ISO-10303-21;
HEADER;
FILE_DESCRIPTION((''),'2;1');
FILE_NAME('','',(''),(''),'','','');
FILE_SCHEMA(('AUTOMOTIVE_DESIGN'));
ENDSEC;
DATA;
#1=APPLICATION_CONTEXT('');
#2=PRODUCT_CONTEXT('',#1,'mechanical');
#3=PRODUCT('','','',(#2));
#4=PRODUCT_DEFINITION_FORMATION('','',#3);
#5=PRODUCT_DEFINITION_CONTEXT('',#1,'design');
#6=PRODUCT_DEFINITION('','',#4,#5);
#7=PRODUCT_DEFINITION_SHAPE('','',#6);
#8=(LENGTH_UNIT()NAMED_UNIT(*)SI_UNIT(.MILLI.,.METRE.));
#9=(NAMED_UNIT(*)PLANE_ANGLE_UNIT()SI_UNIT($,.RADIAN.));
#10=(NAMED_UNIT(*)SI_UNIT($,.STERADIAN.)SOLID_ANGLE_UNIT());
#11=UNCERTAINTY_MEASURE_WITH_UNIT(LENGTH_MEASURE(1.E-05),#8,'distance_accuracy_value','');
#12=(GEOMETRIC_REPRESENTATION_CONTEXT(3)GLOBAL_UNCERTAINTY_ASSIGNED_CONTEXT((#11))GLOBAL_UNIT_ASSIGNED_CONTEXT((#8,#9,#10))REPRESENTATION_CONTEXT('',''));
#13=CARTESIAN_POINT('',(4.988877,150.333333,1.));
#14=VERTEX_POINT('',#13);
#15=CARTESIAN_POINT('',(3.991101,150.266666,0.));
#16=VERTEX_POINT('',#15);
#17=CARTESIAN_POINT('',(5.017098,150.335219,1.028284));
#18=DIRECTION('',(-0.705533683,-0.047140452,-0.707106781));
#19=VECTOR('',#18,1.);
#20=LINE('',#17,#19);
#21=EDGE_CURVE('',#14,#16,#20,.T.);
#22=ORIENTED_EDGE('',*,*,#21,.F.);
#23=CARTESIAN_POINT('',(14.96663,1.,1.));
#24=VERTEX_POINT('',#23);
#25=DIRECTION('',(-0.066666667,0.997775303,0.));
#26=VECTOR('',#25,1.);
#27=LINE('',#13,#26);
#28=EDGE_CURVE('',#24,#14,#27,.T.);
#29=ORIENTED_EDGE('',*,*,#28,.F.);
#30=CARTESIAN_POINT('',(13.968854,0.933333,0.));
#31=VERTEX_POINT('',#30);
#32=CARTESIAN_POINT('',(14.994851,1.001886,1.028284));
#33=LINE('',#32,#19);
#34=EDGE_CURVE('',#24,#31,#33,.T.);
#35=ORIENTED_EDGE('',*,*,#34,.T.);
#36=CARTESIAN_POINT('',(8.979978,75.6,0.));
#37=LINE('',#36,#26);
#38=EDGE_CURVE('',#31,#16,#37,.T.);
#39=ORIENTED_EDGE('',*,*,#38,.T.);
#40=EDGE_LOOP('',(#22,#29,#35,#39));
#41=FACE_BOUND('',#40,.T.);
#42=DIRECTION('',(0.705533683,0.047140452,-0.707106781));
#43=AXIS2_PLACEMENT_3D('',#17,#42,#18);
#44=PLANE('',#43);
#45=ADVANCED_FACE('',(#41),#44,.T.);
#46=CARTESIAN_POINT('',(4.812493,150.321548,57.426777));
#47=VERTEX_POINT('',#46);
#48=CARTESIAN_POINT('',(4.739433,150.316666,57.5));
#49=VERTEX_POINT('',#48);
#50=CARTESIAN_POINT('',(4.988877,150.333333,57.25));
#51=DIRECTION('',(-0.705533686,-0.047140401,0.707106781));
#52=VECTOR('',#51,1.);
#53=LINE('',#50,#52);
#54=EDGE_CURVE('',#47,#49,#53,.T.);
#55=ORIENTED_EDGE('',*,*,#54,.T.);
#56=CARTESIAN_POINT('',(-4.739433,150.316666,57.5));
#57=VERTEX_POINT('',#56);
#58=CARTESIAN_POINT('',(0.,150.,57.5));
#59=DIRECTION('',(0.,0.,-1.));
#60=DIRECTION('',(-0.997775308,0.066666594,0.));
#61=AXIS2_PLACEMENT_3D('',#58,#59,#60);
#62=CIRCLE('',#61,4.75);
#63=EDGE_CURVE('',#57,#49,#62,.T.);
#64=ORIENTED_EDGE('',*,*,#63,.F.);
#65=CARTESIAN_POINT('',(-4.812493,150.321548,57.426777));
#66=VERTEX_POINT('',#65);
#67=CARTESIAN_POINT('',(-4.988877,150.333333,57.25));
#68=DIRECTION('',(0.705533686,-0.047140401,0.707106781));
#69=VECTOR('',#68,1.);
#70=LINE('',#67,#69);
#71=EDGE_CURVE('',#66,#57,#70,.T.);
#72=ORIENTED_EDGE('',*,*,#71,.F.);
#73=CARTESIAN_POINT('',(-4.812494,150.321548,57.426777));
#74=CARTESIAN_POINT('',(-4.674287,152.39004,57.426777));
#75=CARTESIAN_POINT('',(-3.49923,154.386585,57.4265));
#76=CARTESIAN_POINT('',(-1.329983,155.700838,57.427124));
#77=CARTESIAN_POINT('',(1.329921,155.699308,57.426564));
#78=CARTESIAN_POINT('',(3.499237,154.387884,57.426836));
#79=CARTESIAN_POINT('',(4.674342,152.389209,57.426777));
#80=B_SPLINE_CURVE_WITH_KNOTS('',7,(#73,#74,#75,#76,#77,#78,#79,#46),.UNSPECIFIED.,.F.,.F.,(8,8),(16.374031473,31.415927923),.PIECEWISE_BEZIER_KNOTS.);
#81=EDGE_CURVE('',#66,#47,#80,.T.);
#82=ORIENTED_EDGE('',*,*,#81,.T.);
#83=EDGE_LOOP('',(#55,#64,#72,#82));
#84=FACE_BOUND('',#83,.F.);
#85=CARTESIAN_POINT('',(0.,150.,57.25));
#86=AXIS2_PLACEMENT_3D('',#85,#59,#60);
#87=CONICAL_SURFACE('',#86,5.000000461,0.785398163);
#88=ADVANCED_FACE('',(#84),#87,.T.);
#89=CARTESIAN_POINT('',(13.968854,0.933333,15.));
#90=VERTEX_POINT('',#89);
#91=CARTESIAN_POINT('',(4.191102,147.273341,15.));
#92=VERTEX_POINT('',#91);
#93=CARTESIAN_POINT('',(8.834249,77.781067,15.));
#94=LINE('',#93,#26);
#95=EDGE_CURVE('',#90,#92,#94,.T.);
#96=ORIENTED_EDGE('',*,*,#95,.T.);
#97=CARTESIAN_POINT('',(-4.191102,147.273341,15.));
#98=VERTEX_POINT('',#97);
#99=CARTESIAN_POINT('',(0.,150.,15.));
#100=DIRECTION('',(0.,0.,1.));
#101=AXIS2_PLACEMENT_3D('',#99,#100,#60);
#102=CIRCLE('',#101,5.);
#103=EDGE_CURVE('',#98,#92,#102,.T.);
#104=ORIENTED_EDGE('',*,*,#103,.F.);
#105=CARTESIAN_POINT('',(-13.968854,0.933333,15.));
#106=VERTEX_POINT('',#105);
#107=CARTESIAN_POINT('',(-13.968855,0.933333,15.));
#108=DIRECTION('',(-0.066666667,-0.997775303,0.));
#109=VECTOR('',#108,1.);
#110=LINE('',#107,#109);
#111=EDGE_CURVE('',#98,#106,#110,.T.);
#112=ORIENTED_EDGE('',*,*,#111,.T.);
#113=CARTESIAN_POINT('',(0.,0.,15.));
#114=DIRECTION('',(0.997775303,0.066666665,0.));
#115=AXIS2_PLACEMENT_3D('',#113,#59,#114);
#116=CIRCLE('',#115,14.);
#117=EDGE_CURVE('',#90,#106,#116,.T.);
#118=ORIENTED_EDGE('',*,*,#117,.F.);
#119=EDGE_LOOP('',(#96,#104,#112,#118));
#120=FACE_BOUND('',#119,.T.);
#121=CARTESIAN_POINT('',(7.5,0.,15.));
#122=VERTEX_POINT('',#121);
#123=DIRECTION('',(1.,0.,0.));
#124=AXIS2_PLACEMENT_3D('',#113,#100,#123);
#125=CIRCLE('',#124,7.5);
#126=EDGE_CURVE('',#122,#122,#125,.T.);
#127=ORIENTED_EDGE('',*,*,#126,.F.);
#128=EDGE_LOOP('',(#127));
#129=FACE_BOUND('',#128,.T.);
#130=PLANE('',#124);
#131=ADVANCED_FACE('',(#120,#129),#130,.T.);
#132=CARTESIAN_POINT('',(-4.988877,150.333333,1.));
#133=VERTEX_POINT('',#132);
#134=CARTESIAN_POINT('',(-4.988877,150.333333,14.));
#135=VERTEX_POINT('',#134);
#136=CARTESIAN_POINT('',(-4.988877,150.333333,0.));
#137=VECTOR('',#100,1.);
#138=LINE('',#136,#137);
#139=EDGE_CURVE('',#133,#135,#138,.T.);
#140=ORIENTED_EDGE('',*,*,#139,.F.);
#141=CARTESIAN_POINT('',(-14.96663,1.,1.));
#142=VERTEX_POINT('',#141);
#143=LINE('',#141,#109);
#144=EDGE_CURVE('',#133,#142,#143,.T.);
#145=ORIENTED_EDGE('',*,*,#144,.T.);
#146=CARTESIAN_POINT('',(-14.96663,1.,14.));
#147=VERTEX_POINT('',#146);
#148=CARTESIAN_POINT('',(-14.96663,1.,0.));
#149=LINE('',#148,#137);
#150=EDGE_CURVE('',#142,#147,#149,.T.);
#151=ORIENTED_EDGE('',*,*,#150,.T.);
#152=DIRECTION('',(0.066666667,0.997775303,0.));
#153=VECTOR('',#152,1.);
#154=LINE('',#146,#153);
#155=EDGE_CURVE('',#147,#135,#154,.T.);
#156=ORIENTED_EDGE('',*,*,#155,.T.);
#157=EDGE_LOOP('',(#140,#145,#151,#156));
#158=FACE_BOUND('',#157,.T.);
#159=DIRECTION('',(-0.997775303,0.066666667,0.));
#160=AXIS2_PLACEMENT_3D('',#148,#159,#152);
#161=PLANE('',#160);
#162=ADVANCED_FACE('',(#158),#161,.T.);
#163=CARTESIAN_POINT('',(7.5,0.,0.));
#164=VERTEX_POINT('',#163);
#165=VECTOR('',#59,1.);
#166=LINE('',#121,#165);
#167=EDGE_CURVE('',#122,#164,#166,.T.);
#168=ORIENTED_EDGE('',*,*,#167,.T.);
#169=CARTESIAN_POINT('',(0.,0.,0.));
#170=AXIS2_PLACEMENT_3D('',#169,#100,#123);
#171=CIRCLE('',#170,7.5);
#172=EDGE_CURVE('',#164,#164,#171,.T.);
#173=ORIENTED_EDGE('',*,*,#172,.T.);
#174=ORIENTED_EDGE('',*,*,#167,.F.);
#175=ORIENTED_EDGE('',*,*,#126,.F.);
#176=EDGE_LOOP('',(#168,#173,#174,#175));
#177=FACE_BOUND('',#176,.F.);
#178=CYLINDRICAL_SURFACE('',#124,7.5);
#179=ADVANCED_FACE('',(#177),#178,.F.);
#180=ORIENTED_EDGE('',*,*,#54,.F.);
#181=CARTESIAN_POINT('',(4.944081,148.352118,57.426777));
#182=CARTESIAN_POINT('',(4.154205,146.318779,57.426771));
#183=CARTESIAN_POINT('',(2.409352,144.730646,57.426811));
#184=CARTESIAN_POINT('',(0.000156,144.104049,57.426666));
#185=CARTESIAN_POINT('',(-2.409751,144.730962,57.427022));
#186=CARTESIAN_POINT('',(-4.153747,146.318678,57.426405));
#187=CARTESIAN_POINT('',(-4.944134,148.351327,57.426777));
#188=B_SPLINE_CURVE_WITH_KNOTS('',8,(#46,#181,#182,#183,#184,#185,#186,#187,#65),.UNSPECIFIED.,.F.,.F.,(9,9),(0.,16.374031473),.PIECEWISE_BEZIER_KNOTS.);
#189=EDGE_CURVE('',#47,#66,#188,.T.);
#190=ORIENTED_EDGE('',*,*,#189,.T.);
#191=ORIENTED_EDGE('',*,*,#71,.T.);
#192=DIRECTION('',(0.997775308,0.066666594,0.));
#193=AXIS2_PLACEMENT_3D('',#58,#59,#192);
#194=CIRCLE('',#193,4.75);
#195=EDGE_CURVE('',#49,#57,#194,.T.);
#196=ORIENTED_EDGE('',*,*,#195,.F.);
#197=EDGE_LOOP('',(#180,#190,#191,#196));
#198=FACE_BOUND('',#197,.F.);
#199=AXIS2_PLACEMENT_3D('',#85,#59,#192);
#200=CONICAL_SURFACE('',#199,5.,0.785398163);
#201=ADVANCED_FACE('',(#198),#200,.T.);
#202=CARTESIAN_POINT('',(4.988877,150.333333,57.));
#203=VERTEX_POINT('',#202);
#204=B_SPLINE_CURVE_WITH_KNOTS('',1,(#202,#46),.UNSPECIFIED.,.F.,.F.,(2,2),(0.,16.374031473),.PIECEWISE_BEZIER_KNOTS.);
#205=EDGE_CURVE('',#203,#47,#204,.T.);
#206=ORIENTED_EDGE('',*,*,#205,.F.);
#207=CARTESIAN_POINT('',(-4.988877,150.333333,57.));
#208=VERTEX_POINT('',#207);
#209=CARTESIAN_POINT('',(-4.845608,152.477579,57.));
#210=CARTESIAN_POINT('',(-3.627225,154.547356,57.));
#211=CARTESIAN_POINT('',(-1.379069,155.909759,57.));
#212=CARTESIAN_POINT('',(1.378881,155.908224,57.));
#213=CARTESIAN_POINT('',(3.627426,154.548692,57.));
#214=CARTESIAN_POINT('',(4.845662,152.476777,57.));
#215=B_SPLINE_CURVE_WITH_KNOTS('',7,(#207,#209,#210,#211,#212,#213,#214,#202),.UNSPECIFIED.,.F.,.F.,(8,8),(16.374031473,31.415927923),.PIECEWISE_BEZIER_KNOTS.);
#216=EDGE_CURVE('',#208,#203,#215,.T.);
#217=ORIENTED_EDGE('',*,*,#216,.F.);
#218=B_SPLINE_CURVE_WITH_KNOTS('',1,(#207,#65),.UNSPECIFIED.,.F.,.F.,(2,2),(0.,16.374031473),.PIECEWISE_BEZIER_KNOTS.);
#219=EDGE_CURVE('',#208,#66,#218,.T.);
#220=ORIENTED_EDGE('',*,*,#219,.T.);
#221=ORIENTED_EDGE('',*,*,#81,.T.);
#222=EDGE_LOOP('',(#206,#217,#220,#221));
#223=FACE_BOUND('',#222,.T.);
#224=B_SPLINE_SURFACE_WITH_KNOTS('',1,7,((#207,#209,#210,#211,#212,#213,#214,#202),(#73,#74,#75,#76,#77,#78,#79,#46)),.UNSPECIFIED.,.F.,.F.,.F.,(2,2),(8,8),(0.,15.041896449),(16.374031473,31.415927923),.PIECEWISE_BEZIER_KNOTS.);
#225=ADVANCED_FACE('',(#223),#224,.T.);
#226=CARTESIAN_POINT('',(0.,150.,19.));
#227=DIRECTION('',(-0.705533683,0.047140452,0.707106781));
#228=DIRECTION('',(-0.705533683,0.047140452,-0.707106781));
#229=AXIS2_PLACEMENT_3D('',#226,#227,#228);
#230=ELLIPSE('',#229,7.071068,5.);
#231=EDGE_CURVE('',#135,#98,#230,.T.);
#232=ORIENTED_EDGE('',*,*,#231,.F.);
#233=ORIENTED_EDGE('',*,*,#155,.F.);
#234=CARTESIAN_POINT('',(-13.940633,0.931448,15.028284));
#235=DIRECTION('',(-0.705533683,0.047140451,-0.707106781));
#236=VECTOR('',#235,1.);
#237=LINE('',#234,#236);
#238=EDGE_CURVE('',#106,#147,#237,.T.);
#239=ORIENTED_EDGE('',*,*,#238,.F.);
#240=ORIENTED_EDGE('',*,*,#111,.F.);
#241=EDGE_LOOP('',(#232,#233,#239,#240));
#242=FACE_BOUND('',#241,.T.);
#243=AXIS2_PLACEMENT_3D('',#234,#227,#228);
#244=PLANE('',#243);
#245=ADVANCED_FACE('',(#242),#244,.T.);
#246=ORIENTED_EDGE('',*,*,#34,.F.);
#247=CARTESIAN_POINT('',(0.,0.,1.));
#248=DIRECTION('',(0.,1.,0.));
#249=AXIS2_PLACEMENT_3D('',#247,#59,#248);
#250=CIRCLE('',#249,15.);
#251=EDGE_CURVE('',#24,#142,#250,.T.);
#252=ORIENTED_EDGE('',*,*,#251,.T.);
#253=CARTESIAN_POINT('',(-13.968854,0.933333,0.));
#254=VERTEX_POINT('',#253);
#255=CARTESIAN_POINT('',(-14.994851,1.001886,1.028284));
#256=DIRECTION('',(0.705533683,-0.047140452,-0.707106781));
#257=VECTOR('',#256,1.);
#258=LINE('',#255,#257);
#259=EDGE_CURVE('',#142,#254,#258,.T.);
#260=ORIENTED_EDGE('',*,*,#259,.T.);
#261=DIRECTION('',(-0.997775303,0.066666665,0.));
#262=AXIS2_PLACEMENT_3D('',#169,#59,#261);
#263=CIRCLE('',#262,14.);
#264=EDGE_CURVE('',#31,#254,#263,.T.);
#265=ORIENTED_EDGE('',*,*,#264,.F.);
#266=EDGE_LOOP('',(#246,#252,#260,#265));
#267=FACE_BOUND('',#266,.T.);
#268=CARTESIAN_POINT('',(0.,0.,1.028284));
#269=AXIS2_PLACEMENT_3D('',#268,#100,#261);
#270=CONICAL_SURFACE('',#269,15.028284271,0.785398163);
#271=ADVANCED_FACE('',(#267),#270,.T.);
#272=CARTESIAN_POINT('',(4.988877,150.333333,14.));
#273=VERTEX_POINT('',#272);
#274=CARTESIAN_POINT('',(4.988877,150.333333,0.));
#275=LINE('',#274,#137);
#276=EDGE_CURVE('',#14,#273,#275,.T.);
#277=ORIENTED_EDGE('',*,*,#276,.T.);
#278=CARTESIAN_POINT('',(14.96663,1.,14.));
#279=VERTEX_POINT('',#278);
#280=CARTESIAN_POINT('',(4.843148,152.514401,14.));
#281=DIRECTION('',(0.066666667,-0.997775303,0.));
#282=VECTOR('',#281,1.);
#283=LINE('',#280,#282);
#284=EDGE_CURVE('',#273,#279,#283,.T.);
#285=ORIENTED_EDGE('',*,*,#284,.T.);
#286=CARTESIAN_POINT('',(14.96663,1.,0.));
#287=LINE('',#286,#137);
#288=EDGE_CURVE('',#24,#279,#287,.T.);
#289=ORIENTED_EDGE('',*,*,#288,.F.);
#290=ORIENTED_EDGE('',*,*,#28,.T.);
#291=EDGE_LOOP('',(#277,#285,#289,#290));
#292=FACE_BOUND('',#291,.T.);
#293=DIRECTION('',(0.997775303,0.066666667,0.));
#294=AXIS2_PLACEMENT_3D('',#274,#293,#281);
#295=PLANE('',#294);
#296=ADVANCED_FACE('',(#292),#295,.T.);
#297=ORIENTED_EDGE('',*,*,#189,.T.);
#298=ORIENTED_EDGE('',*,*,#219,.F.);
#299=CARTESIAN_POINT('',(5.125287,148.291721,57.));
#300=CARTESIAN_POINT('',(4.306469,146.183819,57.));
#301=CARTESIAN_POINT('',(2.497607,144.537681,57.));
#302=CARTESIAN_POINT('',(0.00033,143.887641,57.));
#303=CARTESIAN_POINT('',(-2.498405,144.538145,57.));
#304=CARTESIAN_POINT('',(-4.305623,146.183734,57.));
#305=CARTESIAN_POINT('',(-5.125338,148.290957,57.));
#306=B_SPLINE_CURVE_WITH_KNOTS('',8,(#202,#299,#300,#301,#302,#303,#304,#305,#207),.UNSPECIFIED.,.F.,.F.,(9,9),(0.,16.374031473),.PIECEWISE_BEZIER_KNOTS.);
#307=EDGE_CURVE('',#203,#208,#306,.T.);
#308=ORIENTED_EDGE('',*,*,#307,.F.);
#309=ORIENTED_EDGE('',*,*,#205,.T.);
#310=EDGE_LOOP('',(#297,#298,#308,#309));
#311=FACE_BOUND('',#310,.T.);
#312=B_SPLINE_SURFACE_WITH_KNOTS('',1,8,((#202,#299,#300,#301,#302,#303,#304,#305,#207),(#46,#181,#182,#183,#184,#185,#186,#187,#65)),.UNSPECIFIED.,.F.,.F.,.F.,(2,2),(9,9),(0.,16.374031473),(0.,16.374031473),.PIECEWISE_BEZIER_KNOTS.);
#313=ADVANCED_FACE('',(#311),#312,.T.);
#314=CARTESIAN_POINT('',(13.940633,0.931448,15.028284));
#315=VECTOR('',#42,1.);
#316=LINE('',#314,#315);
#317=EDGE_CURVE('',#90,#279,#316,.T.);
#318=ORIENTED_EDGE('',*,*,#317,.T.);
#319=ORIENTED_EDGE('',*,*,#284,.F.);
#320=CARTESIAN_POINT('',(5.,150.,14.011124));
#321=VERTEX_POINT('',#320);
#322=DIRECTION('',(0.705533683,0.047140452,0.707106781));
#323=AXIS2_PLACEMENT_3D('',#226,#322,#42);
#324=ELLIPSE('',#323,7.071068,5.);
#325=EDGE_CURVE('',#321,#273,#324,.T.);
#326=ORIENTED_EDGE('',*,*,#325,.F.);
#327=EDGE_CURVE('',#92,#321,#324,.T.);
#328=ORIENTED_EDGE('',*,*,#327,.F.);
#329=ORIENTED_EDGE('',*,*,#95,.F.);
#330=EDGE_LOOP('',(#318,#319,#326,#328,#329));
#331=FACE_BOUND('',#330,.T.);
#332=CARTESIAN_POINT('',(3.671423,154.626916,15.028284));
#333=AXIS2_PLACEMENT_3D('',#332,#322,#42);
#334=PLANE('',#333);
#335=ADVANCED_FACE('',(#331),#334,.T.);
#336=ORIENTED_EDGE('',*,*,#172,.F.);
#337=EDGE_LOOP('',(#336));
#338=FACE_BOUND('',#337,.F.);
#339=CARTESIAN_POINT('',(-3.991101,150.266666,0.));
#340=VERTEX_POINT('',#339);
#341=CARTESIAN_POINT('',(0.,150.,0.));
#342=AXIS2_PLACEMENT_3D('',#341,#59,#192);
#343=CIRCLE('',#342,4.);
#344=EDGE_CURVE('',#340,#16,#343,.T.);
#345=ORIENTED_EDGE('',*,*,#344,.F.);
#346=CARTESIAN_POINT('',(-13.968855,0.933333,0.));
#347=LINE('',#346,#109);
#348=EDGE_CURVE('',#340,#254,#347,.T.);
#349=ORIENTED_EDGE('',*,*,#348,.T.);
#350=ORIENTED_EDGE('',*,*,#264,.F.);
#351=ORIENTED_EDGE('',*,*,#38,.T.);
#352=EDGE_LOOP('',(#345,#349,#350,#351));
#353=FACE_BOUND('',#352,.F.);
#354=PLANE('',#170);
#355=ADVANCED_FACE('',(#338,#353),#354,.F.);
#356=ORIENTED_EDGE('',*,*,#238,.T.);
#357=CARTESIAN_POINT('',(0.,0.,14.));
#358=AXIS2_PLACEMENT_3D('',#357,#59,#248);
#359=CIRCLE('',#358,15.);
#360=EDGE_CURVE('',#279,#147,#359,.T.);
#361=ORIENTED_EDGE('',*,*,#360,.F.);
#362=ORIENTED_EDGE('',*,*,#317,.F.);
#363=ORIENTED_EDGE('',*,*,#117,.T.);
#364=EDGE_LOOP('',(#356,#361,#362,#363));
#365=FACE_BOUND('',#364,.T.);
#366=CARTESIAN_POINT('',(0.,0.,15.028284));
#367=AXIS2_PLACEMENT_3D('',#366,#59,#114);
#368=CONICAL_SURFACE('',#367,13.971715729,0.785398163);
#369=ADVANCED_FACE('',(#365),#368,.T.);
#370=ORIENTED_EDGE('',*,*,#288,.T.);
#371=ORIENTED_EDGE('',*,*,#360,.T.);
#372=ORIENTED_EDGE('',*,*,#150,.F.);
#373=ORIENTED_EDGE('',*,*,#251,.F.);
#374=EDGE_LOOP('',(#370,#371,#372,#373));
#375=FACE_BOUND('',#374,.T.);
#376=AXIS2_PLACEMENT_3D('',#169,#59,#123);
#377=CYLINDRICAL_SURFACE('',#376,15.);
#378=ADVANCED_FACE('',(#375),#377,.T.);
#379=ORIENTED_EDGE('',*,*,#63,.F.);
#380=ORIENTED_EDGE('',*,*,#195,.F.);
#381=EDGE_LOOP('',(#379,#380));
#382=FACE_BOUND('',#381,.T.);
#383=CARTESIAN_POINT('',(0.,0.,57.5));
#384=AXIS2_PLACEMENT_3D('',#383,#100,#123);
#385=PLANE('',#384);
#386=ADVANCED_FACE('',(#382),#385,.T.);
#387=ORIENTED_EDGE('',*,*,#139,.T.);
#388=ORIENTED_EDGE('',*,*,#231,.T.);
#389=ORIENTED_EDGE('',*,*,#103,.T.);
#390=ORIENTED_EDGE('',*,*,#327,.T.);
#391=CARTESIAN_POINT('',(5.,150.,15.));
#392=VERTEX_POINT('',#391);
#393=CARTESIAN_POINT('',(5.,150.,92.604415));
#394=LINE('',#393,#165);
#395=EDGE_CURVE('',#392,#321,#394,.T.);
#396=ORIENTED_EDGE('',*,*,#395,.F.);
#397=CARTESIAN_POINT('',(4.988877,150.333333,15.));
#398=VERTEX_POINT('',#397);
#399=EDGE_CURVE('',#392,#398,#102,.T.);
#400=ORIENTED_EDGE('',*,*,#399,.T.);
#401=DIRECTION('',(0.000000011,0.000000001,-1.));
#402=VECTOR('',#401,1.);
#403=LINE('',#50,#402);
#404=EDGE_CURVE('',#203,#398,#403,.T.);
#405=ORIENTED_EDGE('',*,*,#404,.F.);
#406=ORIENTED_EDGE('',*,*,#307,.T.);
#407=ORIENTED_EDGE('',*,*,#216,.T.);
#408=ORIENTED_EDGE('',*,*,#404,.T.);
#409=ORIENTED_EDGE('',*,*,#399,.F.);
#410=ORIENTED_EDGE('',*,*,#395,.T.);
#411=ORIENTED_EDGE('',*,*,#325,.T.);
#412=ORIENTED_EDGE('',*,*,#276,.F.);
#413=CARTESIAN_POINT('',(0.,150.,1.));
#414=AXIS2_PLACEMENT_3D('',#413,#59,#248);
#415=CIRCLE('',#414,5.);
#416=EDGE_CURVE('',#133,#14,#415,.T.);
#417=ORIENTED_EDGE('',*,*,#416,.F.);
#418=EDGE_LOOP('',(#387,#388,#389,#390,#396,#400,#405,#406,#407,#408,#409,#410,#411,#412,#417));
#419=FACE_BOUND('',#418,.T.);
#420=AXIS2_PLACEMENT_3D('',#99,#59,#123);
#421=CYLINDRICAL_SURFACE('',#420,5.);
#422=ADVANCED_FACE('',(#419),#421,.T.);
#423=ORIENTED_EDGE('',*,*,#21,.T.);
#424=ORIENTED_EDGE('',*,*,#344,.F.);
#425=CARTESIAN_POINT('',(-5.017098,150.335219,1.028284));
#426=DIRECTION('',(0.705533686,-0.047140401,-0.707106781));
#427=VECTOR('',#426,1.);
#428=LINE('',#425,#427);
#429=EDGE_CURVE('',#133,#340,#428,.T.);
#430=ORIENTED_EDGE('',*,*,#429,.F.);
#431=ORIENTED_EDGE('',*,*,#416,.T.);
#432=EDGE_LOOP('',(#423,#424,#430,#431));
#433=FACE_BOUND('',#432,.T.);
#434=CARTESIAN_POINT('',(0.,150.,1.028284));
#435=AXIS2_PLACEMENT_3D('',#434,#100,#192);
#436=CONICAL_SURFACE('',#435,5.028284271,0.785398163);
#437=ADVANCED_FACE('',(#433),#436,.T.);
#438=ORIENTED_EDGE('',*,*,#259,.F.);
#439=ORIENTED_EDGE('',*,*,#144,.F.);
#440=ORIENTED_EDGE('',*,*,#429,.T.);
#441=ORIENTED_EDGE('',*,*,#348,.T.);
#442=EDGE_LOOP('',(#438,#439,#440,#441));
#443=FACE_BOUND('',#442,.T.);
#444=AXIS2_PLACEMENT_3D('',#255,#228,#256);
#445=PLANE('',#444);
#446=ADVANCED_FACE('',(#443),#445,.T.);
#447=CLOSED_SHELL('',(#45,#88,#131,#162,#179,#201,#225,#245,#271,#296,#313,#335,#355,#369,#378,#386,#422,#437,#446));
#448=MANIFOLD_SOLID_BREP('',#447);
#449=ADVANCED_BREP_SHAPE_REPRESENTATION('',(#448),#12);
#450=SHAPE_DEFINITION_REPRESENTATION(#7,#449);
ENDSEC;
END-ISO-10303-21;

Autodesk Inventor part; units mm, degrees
ref_plane "YZ Plane" through (0, 0, 0) normal (1, 0, 0) x (0, 1, 0)
ref_plane "XZ Plane" through (0, 0, 0) normal (0, 1, 0) x (-1, 0, 0)
ref_plane "XY Plane" through (0, 0, 0) normal (0, 0, 1) x (1, 0, 0)
sketch "草图1" plane through (0, 0, 0) normal (0, 0, 1) x (1, 0, 0)
  circle A0 centre (0, 0) radius 15
  circle A1 centre (0, 150) radius 5
  line L0 (0, 150) -> (0, 0)
  line L1 (-14.96663, 1) -> (-4.988877, 150.333333)
  line L2 (4.988877, 150.333333) -> (14.96663, 1)
  dimension "d0" = 30
  dimension "d1" = 10
  dimension "d2" = 150
extrude "拉伸1" add sketch "草图1" along normal blind 15
sketch "草图2" plane through (0, 0, 15) normal (0, 0, 1) x (1, 0, 0)
  circle A0 centre (0, 0) radius 7.5
  dimension "d5" = 15
extrude "拉伸2" cut sketch "草图2" against normal through all
sketch "草图3" plane through (0, 0, 15) normal (0, 0, 1) x (1, 0, 0)
  circle A0 centre (0, 150) radius 5
  arc A1 (4.988877, 150.333333) -> (-4.988877, 150.333333) centre (0, 150) ccw
  point P0 (0, 0)
  dimension "d8" = 10
extrude "拉伸3" add sketch "草图3" along normal blind 42.5
thread "螺纹1" size "M10x1.5" class "6g" standard "ANSI Metric M Profile" length 5
chamfer "倒角1" distance 0.25 angle 45 1 edges at (-5, 150, 57.5)
chamfer "倒角2" distance 1 angle 45 7 edges at (9.9778, 75.6667, 15) (0, -15, 15) (-9.9778, 75.6667, 15) (9.9778, 75.6667, 0) (0, 155, 0) (-9.9778, 75.6667, 0) (0, -15, 0)
chamfer "倒角3" distance 0.25 angle 45 1 edges at (-5, 150, 57.25)
equation "\"d6\" = d5"
properties part number "刀轴带动盘连杆"
